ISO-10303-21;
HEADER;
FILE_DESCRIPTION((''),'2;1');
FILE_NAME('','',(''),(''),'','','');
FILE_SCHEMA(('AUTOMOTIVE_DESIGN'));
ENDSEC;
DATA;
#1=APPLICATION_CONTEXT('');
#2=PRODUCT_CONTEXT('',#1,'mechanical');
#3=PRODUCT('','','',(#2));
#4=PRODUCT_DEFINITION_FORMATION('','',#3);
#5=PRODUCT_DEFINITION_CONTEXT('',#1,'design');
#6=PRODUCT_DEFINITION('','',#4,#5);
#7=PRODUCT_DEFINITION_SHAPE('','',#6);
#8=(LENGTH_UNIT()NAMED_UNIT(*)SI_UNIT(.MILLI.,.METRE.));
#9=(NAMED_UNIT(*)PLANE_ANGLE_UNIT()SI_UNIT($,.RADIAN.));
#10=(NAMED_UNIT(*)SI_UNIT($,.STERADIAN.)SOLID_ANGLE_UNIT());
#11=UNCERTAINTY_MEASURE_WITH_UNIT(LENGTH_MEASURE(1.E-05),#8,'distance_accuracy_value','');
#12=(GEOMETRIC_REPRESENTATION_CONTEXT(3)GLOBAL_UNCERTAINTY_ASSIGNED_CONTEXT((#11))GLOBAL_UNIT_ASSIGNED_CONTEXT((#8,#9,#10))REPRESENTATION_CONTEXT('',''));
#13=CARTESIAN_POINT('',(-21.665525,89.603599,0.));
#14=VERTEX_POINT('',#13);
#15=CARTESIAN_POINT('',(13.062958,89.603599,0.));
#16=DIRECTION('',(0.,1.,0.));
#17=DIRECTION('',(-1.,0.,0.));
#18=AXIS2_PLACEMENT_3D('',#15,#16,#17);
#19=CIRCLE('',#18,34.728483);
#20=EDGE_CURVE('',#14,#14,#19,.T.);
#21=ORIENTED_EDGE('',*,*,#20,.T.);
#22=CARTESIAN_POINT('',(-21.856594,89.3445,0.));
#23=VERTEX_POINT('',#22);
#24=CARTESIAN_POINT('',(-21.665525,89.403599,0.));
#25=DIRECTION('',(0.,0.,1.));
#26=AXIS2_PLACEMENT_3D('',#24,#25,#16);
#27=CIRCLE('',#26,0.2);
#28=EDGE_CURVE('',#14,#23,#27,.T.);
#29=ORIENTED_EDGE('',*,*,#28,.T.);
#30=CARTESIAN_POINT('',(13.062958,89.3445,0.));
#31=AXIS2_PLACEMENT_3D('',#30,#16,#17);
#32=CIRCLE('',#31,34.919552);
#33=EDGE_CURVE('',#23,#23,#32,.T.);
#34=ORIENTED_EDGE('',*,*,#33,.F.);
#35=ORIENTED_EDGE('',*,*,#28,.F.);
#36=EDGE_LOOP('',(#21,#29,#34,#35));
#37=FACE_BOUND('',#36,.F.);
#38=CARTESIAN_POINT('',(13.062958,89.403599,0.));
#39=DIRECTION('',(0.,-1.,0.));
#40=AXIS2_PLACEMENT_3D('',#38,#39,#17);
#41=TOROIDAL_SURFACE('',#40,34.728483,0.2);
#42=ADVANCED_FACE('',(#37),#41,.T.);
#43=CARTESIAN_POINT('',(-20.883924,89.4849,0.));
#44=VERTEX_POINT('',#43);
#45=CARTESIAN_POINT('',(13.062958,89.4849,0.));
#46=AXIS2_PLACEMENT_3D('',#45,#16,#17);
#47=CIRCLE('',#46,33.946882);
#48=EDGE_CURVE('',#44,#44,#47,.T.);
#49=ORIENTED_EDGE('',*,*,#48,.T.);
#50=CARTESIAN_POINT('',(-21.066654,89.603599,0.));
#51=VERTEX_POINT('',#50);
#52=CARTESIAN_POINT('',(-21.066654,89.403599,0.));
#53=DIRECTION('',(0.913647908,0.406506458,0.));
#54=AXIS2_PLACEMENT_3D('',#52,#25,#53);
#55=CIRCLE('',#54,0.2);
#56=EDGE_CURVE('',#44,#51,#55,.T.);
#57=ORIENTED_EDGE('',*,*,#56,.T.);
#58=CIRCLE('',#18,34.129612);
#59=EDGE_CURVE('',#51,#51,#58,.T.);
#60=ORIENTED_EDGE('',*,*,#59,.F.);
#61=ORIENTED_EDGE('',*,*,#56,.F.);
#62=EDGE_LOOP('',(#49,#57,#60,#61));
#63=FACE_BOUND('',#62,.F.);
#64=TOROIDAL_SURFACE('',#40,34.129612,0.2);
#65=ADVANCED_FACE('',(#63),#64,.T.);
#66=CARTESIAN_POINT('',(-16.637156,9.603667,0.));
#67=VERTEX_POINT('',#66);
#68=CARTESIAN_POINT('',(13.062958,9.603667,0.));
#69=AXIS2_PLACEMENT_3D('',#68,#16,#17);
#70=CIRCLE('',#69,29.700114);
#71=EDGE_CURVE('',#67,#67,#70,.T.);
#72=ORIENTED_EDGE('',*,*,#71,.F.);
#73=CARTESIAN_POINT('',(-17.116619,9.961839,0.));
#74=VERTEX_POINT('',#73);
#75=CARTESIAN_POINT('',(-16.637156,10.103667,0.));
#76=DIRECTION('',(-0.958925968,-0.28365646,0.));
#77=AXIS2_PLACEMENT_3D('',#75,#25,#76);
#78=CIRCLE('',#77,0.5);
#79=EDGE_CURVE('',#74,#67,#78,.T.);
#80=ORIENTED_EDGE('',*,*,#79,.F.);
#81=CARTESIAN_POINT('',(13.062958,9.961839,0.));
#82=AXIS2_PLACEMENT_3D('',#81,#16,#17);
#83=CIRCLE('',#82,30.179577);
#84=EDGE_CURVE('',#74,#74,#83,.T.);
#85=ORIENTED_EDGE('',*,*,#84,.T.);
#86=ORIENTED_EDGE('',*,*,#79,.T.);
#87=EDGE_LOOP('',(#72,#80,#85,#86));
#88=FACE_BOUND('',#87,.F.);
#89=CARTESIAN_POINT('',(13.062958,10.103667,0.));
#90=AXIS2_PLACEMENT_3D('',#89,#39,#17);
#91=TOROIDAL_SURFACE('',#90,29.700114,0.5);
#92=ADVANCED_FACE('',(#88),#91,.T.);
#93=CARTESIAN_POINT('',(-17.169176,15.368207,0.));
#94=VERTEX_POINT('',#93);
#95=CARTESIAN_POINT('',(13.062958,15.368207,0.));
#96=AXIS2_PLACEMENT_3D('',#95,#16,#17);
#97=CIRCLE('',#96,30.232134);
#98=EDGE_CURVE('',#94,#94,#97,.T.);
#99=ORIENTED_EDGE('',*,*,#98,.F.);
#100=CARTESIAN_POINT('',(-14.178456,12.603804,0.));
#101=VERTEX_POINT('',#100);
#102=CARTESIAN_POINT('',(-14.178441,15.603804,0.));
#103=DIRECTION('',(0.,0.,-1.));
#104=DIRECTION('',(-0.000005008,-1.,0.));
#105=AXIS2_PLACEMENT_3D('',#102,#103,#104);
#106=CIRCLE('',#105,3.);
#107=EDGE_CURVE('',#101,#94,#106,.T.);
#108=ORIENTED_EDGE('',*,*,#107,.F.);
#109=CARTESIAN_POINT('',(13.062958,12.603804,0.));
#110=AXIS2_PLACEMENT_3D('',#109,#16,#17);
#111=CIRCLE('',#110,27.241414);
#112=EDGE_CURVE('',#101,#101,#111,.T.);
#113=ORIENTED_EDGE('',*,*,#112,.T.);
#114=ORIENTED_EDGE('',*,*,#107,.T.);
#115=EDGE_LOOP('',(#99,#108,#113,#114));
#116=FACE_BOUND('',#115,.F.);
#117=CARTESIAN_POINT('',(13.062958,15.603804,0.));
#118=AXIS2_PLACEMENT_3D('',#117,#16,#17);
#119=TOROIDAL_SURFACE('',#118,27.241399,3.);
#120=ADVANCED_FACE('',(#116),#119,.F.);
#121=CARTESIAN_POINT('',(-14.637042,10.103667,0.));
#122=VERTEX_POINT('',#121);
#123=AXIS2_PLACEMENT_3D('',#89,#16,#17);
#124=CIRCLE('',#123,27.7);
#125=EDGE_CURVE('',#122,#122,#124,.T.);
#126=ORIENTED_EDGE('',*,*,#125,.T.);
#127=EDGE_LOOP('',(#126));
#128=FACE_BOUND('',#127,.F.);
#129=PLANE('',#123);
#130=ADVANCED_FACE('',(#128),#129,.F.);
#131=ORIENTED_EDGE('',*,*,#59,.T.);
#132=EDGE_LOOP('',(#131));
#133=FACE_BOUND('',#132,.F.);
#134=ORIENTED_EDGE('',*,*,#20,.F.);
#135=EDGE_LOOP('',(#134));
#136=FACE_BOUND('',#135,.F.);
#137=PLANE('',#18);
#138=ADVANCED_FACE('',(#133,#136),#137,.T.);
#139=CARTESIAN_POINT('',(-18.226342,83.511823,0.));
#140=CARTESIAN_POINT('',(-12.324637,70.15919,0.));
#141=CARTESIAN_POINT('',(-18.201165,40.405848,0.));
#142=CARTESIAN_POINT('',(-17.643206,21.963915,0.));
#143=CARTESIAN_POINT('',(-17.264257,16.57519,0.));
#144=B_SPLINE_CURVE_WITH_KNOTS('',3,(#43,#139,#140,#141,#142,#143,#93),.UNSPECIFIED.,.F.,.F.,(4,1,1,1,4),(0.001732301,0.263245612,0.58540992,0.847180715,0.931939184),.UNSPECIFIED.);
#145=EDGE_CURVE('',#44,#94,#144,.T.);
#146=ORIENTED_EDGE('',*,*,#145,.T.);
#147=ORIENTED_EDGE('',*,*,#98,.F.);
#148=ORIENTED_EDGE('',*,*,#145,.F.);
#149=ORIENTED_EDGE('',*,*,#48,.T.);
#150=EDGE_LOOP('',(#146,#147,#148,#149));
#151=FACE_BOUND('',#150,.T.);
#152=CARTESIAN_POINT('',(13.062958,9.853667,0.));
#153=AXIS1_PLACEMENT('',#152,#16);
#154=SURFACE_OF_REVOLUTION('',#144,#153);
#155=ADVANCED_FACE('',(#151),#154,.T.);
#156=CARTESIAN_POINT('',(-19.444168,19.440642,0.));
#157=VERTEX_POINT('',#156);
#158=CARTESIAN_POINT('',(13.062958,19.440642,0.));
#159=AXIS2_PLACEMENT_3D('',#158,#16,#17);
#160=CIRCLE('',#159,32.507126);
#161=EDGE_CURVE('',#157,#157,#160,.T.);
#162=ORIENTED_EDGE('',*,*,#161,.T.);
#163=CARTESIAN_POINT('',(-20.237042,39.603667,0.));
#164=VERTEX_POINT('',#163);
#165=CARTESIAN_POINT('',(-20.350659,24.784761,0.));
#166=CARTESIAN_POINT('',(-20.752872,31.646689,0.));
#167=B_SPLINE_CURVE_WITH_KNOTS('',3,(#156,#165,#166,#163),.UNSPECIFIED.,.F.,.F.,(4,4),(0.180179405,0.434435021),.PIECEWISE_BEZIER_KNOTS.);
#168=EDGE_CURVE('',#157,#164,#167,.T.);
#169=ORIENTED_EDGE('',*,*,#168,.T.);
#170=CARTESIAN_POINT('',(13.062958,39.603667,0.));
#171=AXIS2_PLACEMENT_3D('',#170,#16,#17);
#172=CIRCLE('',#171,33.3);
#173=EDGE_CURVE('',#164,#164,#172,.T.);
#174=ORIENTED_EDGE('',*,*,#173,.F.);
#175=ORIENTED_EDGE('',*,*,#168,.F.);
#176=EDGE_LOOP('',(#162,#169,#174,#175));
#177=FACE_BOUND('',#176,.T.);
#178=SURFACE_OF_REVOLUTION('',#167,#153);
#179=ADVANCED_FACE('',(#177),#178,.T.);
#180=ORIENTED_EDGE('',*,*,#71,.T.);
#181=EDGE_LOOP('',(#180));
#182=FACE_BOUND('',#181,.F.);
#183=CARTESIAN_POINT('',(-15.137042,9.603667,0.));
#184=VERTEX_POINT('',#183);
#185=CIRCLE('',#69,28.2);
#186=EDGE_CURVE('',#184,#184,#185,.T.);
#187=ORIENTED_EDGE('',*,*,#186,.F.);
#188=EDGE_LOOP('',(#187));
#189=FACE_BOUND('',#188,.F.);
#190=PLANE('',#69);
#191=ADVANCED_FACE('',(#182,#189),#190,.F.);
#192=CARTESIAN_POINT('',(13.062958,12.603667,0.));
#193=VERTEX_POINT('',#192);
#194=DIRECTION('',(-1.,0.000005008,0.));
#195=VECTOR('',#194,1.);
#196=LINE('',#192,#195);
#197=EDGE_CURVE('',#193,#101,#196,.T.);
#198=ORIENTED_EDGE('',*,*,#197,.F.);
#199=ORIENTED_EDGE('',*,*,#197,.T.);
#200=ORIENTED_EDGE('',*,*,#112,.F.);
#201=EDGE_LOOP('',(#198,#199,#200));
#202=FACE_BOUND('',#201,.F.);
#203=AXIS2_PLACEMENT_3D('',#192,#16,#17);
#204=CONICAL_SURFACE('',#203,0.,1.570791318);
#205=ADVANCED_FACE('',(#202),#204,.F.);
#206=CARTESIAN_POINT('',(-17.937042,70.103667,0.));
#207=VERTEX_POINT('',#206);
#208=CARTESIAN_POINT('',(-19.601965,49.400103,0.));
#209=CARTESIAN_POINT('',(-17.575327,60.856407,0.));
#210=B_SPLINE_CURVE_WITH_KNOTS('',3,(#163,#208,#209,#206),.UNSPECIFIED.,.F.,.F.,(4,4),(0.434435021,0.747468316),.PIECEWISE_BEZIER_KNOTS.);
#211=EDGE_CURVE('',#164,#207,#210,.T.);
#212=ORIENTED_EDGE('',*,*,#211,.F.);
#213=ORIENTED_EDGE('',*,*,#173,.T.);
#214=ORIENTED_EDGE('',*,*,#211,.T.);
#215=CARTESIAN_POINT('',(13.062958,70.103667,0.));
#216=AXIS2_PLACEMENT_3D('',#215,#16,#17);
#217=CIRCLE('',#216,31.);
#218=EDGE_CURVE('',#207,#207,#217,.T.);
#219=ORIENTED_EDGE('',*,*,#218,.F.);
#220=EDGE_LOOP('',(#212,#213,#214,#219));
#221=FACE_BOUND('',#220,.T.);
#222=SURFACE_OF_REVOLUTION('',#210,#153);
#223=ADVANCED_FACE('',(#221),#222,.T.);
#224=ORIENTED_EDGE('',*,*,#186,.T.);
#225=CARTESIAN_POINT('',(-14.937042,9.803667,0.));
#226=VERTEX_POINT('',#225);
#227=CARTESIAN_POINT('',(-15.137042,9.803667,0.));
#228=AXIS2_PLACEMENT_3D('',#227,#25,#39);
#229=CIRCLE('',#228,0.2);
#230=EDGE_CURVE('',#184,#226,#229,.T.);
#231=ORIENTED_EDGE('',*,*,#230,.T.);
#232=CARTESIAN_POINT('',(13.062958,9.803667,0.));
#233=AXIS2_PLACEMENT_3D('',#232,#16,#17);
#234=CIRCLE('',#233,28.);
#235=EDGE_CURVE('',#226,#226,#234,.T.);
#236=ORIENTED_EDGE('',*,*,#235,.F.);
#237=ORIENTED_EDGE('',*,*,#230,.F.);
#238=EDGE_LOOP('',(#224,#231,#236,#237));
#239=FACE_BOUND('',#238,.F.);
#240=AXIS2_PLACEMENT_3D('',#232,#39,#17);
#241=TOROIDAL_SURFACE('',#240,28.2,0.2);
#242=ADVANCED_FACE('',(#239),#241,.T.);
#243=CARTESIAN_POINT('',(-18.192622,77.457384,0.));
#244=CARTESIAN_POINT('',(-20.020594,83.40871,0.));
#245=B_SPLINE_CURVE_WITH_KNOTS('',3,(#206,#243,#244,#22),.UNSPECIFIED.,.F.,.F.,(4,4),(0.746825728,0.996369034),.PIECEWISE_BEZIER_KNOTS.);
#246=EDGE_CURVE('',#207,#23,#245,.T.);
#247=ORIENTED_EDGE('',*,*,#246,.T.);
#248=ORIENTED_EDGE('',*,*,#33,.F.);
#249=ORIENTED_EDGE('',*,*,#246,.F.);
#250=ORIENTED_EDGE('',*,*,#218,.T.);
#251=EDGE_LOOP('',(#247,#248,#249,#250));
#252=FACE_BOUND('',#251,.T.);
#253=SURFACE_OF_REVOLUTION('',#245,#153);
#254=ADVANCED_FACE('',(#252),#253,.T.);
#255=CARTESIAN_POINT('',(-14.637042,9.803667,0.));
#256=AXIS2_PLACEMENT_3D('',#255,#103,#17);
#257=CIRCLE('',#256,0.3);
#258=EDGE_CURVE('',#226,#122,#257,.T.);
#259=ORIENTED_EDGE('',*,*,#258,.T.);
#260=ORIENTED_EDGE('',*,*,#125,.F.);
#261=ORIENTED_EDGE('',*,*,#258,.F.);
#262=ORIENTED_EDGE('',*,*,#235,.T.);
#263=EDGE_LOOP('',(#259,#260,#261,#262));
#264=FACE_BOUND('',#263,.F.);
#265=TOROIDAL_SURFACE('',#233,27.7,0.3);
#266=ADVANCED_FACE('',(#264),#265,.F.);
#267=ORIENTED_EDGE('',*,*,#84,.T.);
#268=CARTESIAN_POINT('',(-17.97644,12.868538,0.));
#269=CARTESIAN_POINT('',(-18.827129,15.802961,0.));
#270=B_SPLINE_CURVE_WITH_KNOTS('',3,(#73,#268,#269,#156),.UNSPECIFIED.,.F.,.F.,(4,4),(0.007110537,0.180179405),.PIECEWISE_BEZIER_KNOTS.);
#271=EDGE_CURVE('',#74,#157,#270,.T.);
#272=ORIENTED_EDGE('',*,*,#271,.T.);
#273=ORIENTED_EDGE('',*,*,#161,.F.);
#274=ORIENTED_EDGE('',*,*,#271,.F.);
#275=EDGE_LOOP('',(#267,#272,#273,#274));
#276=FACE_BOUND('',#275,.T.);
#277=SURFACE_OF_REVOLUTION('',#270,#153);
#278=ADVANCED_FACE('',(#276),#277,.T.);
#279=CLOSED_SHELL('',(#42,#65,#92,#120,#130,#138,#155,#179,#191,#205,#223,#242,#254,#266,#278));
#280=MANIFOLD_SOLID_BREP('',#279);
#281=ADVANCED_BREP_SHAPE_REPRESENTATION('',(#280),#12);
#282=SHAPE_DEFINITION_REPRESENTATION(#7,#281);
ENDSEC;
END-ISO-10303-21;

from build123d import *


with BuildPart() as f1:
    # F0 (on Top) → F1 (revolve)
    with BuildSketch(Plane.XY):
        with BuildLine():
            Line((-14.6370422903, 10.1036671021), (13.0629577097, 10.1036671021))
            Line((13.0629577097, 10.1036671021), (13.0629577097, 12.6036671021))
            Line((13.0629577097, 12.6036671021), (-14.1784562304, 12.6038035398))
            ThreePointArc((-14.1784562304, 12.6038035398), (-16.2147681614, 13.4007664255), (-17.1691759328, 15.3682068762))
            add(Edge.make_bspline(
                [(-20.883924226, 89.4849003641), (-18.2263420174, 83.5118232537), (-12.3246366266, 70.1591899551), (-18.201164969, 40.4058481236), (-17.6432060424, 21.9639149031), (-17.2642566255, 16.5751897143), (-17.1691759328, 15.3682068762)],
                knots=[0.0017323014, 0.0017323014, 0.0017323014, 0.0017323014, 0.263245612, 0.5854099201, 0.8471807154, 0.9319391838, 0.9319391838, 0.9319391838, 0.9319391838], degree=3))
            ThreePointArc((-20.883924226, 89.4849003641), (-20.9577048707, 89.5713194622), (-21.0666538075, 89.6035990723))
            Line((-21.0666538075, 89.6035990723), (-21.6655251791, 89.6035990723))
            ThreePointArc((-21.6655251791, 89.6035990723), (-21.8264908594, 89.5223005877), (-21.8565938809, 89.3444995699))
            add(Edge.make_bspline(
                [(-17.9370422782, 70.1036666905), (-18.1926220786, 77.4573838205), (-20.0205935681, 83.4087102326), (-21.8565938809, 89.3444995699)],
                knots=[0.7468257278, 0.7468257278, 0.7468257278, 0.7468257278, 0.9963690343, 0.9963690343, 0.9963690343, 0.9963690343], degree=3))
            add(Edge.make_bspline(
                [(-20.2370421016, 39.6036670984), (-19.6019652652, 49.4001033217), (-17.5753267132, 60.8564073711), (-17.9370422798, 70.1036667357)],
                knots=[0.4344350208, 0.4344350208, 0.4344350208, 0.4344350208, 0.7474683162, 0.7474683162, 0.7474683162, 0.7474683162], degree=3))
            add(Edge.make_bspline(
                [(-19.4441677957, 19.4406417091), (-19.849904935, 24.8158820913), (-20.6073778309, 31.6554394078), (-20.2370421046, 39.6036670568)],
                knots=[0.1780933018, 0.1780933018, 0.1780933018, 0.1780933018, 0.4329958924, 0.4329958924, 0.4329958924, 0.4329958924], degree=3))
            add(Edge.make_bspline(
                [(-17.1166194806, 9.9618388722), (-17.9764397241, 12.8685379122), (-18.8271293588, 15.8029613087), (-19.4441677932, 19.4406416767)],
                knots=[0.0071105369, 0.0071105369, 0.0071105369, 0.0071105369, 0.1801794053, 0.1801794053, 0.1801794053, 0.1801794053], degree=3))
            ThreePointArc((-17.1166194806, 9.9618388722), (-16.9363937644, 9.7030961877), (-16.6371564964, 9.6036671021))
            Line((-16.6371564964, 9.6036671021), (-15.1370422903, 9.6036671021))
            ThreePointArc((-15.1370422903, 9.6036671021), (-14.9956209341, 9.6622457458), (-14.9370422903, 9.8036671021))
            ThreePointArc((-14.9370422903, 9.8036671021), (-14.8491743247, 10.0157991364), (-14.6370422903, 10.1036671021))
        make_face()
        with BuildLine():
            add(Edge.make_bspline(
                [(-19.4441677932, 19.4406416767), (-20.3506594604, 24.7847608711), (-20.7528717412, 31.6466894915), (-20.2370421016, 39.6036670984)],
                knots=[0.1801794053, 0.1801794053, 0.1801794053, 0.1801794053, 0.4344350208, 0.4344350208, 0.4344350208, 0.4344350208], degree=3))
            add(Edge.make_bspline(
                [(-19.4441677957, 19.4406417091), (-19.849904935, 24.8158820913), (-20.6073778309, 31.6554394078), (-20.2370421046, 39.6036670568)],
                knots=[0.1780933018, 0.1780933018, 0.1780933018, 0.1780933018, 0.4329958924, 0.4329958924, 0.4329958924, 0.4329958924], degree=3))
        make_face()
    revolve(axis=Axis((13.0629577097, 9.8536671021, 0), (0, 1, 0)))


solid = f1.part
